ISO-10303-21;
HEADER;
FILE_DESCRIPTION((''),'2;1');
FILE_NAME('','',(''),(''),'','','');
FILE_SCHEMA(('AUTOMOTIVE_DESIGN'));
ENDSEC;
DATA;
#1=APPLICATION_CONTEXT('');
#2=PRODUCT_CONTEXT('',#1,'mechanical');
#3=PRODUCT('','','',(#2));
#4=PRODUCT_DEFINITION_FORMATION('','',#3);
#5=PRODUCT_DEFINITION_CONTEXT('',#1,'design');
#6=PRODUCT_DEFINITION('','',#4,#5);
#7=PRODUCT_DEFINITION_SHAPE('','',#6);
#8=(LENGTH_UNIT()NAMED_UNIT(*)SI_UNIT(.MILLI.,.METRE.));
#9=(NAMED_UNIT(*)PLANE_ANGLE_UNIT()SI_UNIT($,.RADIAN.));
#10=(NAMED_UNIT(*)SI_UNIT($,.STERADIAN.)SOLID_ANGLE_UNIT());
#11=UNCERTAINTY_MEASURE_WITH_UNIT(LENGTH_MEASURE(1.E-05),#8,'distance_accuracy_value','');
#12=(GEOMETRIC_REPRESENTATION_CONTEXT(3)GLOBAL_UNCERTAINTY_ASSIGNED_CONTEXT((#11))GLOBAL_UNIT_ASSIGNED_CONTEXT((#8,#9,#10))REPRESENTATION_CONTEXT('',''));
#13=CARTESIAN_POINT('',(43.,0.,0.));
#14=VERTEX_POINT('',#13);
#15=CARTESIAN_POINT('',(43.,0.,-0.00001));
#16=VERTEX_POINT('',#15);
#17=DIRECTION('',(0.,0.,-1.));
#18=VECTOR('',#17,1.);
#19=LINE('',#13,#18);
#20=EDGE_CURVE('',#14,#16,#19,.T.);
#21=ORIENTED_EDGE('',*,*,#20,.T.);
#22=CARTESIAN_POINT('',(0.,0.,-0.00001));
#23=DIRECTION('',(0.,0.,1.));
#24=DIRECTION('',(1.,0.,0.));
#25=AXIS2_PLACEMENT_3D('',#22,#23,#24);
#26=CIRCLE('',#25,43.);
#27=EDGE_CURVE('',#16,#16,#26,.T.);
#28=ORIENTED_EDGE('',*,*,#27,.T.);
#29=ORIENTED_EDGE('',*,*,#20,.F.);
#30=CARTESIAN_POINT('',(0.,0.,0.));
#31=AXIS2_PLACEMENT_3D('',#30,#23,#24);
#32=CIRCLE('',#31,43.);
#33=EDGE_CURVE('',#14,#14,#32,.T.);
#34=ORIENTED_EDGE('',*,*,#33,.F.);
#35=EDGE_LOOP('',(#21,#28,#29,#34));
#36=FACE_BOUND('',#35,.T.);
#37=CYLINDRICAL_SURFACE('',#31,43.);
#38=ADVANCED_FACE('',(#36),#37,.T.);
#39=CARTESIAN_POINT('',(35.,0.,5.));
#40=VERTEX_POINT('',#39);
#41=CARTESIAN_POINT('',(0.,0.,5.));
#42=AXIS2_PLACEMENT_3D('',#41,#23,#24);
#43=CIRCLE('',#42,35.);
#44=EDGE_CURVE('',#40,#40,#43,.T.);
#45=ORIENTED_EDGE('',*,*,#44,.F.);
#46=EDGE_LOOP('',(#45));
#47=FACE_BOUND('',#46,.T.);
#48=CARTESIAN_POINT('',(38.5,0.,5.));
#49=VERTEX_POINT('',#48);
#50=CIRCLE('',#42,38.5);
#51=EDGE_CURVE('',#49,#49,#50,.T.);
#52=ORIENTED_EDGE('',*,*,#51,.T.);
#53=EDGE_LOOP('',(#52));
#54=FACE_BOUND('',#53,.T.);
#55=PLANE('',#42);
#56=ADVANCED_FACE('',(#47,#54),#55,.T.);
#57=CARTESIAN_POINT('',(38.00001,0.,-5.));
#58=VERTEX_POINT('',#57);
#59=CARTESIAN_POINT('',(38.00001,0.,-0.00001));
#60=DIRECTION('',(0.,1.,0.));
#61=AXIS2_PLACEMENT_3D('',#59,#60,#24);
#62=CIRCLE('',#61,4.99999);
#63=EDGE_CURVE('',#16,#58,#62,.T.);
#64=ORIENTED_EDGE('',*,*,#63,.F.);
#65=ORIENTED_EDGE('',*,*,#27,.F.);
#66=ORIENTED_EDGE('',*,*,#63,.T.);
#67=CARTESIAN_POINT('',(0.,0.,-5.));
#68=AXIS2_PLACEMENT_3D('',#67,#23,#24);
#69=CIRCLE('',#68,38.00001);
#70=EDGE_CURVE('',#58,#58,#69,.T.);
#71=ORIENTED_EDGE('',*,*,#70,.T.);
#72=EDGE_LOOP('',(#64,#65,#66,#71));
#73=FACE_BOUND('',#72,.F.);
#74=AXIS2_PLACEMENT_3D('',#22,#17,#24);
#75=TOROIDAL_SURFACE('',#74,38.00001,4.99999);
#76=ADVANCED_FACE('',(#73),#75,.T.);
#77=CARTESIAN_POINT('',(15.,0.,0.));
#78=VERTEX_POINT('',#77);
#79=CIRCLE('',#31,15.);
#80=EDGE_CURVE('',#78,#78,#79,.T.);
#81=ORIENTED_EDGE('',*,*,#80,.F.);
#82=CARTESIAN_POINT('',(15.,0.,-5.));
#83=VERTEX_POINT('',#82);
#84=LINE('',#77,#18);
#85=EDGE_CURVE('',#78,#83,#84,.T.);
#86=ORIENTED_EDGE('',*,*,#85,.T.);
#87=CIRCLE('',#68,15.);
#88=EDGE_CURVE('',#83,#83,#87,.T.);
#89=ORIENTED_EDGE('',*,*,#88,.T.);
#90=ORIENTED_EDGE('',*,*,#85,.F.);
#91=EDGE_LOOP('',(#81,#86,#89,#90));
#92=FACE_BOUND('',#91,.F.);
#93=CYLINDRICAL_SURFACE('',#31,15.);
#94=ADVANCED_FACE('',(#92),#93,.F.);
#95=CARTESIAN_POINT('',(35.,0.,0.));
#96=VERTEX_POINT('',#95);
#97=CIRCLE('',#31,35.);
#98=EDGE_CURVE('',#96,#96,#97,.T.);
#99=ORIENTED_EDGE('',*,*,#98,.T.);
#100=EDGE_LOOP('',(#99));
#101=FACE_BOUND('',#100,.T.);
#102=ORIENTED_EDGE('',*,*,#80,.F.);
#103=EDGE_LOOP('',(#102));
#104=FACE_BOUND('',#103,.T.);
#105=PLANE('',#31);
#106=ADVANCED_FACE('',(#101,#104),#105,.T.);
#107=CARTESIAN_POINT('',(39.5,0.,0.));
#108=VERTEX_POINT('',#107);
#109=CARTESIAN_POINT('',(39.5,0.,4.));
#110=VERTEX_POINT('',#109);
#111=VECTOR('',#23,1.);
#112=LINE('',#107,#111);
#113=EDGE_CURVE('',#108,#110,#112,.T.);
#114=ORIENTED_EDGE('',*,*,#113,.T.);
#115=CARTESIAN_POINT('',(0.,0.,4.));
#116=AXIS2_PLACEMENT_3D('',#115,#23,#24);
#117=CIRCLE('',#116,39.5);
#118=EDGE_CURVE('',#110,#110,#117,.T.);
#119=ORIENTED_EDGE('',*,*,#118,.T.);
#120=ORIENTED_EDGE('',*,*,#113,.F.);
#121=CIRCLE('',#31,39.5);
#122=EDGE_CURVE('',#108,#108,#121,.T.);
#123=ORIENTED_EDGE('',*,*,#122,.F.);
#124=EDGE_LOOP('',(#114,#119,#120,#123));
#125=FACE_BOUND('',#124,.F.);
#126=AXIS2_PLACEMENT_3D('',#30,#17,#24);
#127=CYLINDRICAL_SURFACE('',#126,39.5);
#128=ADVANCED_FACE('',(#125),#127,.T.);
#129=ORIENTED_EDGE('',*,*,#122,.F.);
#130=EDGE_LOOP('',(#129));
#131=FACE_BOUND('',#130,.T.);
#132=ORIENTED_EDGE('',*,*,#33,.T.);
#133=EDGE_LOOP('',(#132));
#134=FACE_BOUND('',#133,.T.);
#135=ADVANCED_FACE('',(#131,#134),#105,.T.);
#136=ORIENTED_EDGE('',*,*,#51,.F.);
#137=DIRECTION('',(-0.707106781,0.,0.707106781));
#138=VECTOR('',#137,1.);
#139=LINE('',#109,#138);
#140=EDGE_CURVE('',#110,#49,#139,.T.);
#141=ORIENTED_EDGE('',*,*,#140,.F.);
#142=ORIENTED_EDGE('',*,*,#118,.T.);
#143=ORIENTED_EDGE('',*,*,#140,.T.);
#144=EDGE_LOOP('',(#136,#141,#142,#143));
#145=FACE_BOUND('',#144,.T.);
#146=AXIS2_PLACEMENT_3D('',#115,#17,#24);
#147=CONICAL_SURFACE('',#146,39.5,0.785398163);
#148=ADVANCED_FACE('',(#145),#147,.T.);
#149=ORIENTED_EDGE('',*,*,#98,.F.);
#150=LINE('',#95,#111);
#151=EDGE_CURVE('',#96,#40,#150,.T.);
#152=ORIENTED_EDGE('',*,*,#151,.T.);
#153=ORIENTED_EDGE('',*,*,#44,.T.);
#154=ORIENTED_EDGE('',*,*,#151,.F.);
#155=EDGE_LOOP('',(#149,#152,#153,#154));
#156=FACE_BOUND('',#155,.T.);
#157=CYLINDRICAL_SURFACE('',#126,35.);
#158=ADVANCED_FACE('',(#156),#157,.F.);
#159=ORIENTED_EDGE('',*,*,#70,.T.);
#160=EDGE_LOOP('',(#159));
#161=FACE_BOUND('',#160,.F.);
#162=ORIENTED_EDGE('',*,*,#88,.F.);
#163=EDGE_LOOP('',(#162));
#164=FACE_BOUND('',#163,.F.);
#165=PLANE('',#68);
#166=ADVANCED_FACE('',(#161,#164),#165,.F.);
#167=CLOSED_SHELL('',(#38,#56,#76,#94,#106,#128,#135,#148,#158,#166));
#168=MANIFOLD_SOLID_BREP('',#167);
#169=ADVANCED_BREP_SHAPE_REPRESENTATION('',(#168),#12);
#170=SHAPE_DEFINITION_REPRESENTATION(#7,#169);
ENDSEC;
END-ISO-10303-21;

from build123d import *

# Parameters (mm, degrees)
F0_R     = 39.5
F0_R_2   = 35
F1_DEPTH = 5
F0_R_3   = 43
F0_R_4   = 15
F2_DEPTH = 5
F3_R     = 4.99999
F4_SIZE  = 1


# Not quite as in the source:
# - a fillet or chamfer is up to 0.001 mm smaller than in the source, because OpenCascade refuses the exact size


with BuildPart() as f1:
    # F0 (on Top) → F1 (new body)
    with BuildSketch(Plane.XY):
        Circle(F0_R)
        Circle(F0_R_2, mode=Mode.SUBTRACT)
    extrude(amount=F1_DEPTH)

    # F0 (on Top) → F2 (join)
    with BuildSketch(Plane.XY):
        Circle(F0_R_3)
        Circle(F0_R, mode=Mode.SUBTRACT)
        Circle(F0_R)
        Circle(F0_R_2, mode=Mode.SUBTRACT)
        Circle(F0_R_2)
        Circle(F0_R_4, mode=Mode.SUBTRACT)
    extrude(amount=-F2_DEPTH)

    # F3 (radius 5 in the source; OpenCascade refuses exactly that, so slightly less here)
    f3_edges = [f1.edges().sort_by_distance(p)[0] for p in [
        (-43, 0, -5),
    ]]
    fillet(f3_edges, radius=F3_R)

    # F4
    f4_edges = [f1.edges().sort_by_distance(p)[0] for p in [
        (-39.5, 0, 5),
    ]]
    chamfer(f4_edges, length=F4_SIZE)


solid = f1.part
